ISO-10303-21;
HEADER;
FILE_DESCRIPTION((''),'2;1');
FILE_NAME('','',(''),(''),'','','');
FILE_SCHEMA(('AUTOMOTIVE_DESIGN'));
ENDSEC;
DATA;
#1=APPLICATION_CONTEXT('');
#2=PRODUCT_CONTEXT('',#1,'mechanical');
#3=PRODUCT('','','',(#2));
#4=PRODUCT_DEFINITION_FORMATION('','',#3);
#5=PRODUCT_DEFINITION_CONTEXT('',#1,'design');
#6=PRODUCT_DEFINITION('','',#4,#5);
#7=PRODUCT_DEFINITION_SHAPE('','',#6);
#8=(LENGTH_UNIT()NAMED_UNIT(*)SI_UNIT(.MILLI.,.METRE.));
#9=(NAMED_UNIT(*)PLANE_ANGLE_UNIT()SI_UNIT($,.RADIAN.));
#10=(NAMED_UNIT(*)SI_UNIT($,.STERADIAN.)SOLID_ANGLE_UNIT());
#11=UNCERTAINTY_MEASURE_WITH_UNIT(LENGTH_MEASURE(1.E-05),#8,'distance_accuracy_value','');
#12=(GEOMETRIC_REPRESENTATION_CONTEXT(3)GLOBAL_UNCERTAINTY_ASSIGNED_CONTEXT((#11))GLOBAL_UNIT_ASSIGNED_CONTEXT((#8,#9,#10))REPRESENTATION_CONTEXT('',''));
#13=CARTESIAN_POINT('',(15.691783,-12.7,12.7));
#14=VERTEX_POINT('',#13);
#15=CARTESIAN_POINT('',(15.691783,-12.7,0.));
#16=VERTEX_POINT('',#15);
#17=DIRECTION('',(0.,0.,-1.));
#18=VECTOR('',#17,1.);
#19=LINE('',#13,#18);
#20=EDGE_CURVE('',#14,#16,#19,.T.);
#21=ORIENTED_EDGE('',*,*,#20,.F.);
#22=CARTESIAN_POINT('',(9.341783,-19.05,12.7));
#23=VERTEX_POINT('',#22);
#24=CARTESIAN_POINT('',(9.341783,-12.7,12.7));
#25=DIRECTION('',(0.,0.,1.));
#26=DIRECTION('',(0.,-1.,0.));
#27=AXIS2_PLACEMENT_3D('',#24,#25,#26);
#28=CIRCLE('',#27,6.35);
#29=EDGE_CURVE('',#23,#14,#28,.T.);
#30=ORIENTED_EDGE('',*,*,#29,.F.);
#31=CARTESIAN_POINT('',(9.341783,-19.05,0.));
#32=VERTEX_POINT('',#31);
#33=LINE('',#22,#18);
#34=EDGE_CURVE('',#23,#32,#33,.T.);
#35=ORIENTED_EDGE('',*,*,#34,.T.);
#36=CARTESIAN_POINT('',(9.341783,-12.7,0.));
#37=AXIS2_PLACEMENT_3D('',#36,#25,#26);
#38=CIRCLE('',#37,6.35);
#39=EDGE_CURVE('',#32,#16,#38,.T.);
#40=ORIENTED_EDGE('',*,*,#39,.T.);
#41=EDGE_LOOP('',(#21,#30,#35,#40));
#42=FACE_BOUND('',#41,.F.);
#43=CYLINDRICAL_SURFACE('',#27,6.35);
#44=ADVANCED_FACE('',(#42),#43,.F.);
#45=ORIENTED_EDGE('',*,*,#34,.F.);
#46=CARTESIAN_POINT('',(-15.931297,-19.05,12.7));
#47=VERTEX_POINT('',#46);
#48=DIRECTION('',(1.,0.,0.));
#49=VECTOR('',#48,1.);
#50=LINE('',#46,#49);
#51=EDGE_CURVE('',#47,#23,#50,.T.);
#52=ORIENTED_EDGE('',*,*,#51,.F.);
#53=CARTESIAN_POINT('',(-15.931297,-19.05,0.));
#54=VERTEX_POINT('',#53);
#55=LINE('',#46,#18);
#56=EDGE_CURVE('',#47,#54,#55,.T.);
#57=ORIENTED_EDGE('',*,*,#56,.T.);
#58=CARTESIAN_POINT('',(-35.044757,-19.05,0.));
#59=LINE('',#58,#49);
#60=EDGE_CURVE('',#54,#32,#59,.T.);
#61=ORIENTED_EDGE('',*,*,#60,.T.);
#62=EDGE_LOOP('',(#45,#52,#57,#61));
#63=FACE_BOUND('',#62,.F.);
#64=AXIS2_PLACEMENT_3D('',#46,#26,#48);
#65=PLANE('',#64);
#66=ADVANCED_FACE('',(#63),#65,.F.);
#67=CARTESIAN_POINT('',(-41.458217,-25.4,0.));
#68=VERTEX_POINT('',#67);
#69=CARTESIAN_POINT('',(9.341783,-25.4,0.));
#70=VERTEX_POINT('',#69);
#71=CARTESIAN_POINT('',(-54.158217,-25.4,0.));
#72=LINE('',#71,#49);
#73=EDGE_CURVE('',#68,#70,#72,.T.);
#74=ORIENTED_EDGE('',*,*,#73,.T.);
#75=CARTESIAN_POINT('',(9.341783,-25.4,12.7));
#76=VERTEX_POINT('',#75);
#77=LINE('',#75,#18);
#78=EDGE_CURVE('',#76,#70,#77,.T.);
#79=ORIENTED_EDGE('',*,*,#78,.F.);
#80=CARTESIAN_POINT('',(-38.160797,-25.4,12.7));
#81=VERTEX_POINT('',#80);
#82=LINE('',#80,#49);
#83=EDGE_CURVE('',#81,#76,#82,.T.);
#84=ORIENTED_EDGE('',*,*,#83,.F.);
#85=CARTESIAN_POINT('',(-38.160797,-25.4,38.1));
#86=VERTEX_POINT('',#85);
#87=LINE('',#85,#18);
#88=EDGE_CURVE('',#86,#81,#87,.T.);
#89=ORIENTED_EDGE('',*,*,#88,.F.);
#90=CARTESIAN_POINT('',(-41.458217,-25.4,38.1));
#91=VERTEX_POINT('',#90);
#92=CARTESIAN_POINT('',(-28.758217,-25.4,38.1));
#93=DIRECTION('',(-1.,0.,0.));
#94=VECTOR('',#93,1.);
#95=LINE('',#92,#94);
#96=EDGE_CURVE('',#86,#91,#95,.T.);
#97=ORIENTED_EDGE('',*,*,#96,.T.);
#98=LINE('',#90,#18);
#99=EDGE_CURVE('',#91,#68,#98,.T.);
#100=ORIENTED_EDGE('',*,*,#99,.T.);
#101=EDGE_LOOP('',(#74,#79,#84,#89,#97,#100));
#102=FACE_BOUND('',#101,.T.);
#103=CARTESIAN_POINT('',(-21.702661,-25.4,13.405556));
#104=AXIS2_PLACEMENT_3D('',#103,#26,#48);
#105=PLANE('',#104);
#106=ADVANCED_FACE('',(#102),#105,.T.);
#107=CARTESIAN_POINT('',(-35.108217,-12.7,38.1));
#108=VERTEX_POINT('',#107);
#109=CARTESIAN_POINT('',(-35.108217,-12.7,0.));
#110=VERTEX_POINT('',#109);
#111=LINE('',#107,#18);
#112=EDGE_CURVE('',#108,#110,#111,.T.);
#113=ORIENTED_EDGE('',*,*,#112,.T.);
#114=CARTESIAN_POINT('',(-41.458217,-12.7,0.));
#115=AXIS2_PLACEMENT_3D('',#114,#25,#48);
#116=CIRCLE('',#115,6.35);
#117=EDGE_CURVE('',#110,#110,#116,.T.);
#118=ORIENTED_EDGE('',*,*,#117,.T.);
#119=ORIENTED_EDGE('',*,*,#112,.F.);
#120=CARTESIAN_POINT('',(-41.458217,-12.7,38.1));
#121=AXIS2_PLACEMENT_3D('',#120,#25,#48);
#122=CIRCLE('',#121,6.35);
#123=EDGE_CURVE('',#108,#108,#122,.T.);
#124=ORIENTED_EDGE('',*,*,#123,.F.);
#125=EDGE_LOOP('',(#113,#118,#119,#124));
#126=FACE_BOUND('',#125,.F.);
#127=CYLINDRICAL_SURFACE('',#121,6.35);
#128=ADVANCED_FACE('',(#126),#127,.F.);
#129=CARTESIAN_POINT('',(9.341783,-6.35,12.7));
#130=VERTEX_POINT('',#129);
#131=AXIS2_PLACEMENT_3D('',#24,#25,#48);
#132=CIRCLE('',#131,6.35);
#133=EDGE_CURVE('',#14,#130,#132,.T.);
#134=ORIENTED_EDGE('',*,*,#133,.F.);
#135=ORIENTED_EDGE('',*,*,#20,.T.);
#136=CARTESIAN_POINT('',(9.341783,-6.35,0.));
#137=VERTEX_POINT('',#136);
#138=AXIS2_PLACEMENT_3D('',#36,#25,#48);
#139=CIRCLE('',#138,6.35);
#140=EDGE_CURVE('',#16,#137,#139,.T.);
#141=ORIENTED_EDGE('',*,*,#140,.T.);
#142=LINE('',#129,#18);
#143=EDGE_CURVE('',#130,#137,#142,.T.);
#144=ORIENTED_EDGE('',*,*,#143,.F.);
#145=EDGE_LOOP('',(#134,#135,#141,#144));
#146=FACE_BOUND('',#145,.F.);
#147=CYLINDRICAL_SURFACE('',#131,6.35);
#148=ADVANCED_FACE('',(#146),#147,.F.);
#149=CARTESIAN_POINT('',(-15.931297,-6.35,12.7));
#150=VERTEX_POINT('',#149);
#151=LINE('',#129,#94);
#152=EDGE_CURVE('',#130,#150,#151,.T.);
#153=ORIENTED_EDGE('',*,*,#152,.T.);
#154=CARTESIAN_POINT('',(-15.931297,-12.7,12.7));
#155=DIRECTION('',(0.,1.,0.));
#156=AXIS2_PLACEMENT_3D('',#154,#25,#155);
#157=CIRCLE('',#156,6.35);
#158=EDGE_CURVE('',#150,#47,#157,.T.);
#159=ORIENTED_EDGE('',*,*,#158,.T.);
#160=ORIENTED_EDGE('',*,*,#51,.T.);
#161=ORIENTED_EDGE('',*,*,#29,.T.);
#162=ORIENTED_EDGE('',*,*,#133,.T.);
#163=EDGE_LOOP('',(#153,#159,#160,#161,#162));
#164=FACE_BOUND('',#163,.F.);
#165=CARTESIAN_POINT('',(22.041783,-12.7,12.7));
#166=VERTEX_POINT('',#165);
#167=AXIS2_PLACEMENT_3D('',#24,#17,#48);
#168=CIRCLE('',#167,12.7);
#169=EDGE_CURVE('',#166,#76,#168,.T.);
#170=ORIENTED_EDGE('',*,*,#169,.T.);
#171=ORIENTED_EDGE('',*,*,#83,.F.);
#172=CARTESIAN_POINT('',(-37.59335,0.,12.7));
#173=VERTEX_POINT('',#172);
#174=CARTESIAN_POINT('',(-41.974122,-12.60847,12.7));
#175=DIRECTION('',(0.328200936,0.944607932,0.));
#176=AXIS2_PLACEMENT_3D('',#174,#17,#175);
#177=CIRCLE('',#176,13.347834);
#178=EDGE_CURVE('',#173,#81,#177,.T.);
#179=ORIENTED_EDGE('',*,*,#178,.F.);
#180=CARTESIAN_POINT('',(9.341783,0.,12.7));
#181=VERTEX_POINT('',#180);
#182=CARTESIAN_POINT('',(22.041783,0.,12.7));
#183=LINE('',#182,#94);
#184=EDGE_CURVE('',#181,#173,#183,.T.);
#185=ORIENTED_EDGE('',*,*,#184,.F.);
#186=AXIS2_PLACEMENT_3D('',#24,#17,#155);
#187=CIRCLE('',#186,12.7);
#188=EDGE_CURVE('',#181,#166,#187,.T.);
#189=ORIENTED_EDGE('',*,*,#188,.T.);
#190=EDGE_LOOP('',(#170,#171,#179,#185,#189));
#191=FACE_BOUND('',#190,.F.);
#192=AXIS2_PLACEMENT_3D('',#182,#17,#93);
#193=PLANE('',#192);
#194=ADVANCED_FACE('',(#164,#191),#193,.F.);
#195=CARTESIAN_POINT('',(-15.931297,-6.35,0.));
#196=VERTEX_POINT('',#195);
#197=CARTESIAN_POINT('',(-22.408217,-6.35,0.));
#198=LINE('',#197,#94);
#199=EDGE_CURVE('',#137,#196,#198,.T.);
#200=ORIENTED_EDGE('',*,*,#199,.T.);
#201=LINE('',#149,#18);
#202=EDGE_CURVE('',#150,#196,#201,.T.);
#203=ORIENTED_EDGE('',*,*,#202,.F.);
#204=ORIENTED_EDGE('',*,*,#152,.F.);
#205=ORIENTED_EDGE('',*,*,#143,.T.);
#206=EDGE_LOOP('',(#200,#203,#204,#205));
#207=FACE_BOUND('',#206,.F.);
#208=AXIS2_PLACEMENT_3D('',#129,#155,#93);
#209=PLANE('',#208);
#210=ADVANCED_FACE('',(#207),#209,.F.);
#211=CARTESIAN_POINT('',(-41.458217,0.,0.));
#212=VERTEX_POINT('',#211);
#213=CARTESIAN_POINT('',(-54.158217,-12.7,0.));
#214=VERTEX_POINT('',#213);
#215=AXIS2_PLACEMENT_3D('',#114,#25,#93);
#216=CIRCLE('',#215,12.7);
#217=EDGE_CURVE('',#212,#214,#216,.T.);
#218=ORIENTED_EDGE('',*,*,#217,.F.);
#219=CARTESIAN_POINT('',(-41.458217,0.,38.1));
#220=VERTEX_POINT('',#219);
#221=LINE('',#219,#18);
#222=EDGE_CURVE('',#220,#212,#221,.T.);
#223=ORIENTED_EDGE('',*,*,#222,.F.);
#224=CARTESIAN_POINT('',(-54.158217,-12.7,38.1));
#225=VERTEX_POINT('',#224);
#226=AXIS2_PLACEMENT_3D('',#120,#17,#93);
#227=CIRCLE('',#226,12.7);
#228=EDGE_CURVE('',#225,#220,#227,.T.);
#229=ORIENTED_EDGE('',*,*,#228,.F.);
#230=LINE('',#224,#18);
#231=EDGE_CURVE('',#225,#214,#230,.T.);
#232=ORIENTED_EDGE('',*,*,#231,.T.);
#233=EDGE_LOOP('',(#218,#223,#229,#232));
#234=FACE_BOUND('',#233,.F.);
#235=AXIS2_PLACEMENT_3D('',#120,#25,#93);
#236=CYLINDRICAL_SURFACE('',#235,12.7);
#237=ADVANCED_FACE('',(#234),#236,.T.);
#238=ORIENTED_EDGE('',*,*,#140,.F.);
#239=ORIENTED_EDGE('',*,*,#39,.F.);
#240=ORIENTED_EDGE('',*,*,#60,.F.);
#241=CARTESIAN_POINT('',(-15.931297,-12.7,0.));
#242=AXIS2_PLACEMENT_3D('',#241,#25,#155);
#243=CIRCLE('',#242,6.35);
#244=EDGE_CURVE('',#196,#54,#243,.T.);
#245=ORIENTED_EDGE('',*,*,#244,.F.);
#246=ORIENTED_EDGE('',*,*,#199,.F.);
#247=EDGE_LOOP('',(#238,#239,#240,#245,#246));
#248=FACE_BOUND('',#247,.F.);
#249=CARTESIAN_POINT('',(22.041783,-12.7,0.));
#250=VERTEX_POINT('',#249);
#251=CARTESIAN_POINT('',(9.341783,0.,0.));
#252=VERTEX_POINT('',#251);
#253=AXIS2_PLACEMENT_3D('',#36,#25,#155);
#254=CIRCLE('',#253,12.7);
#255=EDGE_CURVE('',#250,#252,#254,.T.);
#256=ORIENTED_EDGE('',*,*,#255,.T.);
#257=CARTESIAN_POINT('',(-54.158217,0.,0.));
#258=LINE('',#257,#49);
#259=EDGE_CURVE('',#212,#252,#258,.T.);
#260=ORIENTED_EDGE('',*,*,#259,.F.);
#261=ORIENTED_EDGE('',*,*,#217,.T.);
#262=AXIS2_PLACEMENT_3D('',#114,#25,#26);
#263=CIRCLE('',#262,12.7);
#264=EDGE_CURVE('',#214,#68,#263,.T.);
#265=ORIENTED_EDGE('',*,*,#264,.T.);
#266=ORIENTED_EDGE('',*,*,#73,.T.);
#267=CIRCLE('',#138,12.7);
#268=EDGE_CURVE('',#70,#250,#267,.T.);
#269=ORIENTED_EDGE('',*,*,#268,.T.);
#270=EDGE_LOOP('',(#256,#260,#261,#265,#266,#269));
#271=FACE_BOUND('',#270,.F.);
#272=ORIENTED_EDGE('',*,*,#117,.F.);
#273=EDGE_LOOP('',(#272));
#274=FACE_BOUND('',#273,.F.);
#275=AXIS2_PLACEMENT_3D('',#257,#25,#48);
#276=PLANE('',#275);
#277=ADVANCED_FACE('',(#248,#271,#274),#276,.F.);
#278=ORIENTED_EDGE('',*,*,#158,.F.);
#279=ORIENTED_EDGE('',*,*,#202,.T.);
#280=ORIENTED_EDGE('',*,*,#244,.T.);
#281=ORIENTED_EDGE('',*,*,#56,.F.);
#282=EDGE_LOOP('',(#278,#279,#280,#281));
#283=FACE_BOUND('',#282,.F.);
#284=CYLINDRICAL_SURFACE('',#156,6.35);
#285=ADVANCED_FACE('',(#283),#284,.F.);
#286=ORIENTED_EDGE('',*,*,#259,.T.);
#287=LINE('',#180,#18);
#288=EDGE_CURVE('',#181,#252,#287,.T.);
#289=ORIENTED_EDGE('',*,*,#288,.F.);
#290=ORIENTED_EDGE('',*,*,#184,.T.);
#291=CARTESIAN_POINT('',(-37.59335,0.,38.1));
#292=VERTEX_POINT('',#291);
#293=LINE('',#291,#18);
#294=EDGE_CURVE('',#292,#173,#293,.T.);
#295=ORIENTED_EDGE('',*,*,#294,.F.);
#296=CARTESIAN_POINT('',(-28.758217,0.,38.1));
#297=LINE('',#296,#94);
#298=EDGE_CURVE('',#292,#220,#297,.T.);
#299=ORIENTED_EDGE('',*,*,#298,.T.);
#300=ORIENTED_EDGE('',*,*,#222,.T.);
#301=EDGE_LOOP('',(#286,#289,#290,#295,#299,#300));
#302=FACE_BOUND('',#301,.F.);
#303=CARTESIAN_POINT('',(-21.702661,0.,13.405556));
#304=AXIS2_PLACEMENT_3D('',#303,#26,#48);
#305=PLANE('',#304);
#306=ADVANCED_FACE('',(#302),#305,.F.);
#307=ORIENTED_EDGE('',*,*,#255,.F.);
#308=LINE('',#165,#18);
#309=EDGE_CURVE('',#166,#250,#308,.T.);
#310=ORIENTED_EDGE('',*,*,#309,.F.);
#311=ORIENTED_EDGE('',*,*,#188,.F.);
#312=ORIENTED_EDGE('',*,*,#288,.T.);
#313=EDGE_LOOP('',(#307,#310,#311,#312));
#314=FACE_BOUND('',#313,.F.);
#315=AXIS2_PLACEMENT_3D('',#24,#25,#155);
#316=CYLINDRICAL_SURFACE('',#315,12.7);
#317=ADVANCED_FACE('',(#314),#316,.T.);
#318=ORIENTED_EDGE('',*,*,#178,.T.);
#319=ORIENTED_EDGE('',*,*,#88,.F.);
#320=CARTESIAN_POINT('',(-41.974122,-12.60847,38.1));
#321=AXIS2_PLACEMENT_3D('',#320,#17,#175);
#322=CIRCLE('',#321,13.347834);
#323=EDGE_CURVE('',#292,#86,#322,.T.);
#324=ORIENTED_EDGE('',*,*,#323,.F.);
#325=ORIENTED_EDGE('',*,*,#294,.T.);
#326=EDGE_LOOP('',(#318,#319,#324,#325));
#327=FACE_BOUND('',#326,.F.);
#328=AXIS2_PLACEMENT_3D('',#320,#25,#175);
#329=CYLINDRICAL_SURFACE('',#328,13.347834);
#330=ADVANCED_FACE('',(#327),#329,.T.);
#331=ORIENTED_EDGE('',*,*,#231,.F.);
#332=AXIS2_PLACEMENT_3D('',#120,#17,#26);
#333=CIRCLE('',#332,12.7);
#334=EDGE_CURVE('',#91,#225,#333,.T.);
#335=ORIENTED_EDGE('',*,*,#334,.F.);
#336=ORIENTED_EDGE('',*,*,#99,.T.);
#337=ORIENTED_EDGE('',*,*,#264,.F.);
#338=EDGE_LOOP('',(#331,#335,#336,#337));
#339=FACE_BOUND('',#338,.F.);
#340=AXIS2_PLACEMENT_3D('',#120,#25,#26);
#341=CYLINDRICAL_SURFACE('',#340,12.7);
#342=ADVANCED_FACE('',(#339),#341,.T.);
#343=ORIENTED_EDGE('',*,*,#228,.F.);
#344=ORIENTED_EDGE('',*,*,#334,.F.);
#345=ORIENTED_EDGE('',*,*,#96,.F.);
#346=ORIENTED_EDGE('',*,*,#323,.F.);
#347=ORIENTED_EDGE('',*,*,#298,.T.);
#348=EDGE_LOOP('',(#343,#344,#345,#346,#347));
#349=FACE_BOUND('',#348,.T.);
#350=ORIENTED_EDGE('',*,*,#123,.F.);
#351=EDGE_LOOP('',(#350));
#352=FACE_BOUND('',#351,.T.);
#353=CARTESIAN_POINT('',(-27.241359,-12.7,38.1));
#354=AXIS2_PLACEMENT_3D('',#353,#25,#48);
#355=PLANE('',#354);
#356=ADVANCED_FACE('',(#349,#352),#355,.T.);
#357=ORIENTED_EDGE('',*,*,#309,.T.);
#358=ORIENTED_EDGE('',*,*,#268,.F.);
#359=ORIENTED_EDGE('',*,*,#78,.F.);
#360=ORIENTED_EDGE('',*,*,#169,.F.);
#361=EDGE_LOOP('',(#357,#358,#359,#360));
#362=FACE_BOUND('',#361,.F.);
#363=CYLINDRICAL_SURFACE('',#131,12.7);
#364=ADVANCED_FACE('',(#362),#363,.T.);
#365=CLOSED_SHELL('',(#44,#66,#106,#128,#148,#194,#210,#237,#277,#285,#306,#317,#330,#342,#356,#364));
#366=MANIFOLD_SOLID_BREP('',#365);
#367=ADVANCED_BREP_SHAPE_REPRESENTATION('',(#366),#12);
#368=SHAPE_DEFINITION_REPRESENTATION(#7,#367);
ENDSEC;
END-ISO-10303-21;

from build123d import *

# Parameters (mm, degrees)
F1_DEPTH = 25.4
F3_DEPTH = 25.4
F4_R     = 6.35
F5_DEPTH = 127
F7_DEPTH = 25.4
F9_DEPTH = 25.4


# Not quite as in the source:
# - a feature names something its author has since deleted; it is built from what else it names


with BuildPart() as f1:
    # F0 (on Front) → F1 (new body)
    with BuildSketch(Plane.XZ):
        Polygon((-28.758216656, 38.1), (-54.158216656, 38.1), (-54.158216656, 0), (22.041783344, 0), (22.041783344, 12.7), (-28.758216656, 12.7), align=None)
    extrude(amount=F1_DEPTH)

    # F2 (on face) → F3 (join)
    with BuildSketch(Plane.XY.offset(12.7)):
        with BuildLine():
            Line((-28.758216656, 0), (-28.758216656, -25.4))
            ThreePointArc((-28.758216656, -25.4), (-23.817550475, -12.7), (-28.758216656, 0))
        make_face()
    extrude(amount=F3_DEPTH)

    # F4 (on face) → F5 (cut)
    with BuildSketch(Plane.XY.offset(38.1)):
        with BuildLine():
            ThreePointArc((-54.158216656, -12.7), (-50.438472777, -3.7197438789), (-41.458216656, 0))
            Line((-41.458216656, 0), (-54.158216656, 0))
            Line((-54.158216656, 0), (-54.158216656, -12.7))
        make_face()
        with BuildLine():
            Line((-54.158216656, -25.4), (-41.458216656, -25.4))
            ThreePointArc((-41.458216656, -25.4), (-50.438472777, -21.6802561211), (-54.158216656, -12.7))
            Line((-54.158216656, -12.7), (-54.158216656, -25.4))
        make_face()
        with Locations((-41.458216656, -12.7)):
            Circle(F4_R)
    extrude(amount=-F5_DEPTH, mode=Mode.SUBTRACT)

    # F6 (on face) → F7 (cut)
    with BuildSketch(Plane.XY.offset(38.1)):
        with BuildLine():
            ThreePointArc((-37.5933498144, 0), (-28.6296169388, -12.9065923281), (-38.1607972085, -25.4))
            Line((-38.1607972085, -25.4), (-28.758216656, -25.4))
            ThreePointArc((-28.758216656, -25.4), (-23.817550475, -12.7), (-28.758216656, 0))
            Line((-28.758216656, 0), (-37.5933498144, 0))
        make_face()
    extrude(amount=-F7_DEPTH, mode=Mode.SUBTRACT)

    # F8 (on face) → F9 (cut)
    with BuildSketch(Plane.XY.offset(12.7)):
        with BuildLine():
            ThreePointArc((15.691783344, -12.7), (13.8319114046, -8.2098719395), (9.341783344, -6.35))
            ThreePointArc((9.341783344, -6.35), (2.991783344, -12.7), (9.341783344, -19.05))
            ThreePointArc((9.341783344, -19.05), (13.8319114046, -17.1901280605), (15.691783344, -12.7))
        make_face()
        with BuildLine():
            ThreePointArc((-15.9312973803, -6.35), (-11.4411693197, -8.2098719395), (-9.5812973803, -12.7))
            ThreePointArc((-9.5812973803, -12.7), (-11.4411693197, -17.1901280605), (-15.9312973803, -19.05))
            Line((-15.9312973803, -19.05), (9.341783344, -19.05))
            ThreePointArc((9.341783344, -19.05), (2.991783344, -12.7), (9.341783344, -6.35))
            Line((9.341783344, -6.35), (-15.9312973803, -6.35))
        make_face()
        with BuildLine():
            ThreePointArc((-15.9312973803, -19.05), (-11.4411693197, -17.1901280605), (-9.5812973803, -12.7))
            ThreePointArc((-9.5812973803, -12.7), (-11.4411693197, -8.2098719395), (-15.9312973803, -6.35))
            ThreePointArc((-15.9312973803, -6.35), (-22.2812973803, -12.7), (-15.9312973803, -19.05))
        make_face()
        with BuildLine():
            ThreePointArc((9.341783344, 0), (18.3220394651, -3.7197438789), (22.041783344, -12.7))
            Line((22.041783344, -12.7), (22.041783344, 0))
            Line((22.041783344, 0), (9.341783344, 0))
        make_face()
        with BuildLine():
            ThreePointArc((22.041783344, -12.7), (18.3220394651, -21.6802561211), (9.341783344, -25.4))
            Line((9.341783344, -25.4), (22.041783344, -25.4))
            Line((22.041783344, -25.4), (22.041783344, -12.7))
        make_face()
    extrude(amount=-F9_DEPTH, mode=Mode.SUBTRACT)


solid = f1.part
